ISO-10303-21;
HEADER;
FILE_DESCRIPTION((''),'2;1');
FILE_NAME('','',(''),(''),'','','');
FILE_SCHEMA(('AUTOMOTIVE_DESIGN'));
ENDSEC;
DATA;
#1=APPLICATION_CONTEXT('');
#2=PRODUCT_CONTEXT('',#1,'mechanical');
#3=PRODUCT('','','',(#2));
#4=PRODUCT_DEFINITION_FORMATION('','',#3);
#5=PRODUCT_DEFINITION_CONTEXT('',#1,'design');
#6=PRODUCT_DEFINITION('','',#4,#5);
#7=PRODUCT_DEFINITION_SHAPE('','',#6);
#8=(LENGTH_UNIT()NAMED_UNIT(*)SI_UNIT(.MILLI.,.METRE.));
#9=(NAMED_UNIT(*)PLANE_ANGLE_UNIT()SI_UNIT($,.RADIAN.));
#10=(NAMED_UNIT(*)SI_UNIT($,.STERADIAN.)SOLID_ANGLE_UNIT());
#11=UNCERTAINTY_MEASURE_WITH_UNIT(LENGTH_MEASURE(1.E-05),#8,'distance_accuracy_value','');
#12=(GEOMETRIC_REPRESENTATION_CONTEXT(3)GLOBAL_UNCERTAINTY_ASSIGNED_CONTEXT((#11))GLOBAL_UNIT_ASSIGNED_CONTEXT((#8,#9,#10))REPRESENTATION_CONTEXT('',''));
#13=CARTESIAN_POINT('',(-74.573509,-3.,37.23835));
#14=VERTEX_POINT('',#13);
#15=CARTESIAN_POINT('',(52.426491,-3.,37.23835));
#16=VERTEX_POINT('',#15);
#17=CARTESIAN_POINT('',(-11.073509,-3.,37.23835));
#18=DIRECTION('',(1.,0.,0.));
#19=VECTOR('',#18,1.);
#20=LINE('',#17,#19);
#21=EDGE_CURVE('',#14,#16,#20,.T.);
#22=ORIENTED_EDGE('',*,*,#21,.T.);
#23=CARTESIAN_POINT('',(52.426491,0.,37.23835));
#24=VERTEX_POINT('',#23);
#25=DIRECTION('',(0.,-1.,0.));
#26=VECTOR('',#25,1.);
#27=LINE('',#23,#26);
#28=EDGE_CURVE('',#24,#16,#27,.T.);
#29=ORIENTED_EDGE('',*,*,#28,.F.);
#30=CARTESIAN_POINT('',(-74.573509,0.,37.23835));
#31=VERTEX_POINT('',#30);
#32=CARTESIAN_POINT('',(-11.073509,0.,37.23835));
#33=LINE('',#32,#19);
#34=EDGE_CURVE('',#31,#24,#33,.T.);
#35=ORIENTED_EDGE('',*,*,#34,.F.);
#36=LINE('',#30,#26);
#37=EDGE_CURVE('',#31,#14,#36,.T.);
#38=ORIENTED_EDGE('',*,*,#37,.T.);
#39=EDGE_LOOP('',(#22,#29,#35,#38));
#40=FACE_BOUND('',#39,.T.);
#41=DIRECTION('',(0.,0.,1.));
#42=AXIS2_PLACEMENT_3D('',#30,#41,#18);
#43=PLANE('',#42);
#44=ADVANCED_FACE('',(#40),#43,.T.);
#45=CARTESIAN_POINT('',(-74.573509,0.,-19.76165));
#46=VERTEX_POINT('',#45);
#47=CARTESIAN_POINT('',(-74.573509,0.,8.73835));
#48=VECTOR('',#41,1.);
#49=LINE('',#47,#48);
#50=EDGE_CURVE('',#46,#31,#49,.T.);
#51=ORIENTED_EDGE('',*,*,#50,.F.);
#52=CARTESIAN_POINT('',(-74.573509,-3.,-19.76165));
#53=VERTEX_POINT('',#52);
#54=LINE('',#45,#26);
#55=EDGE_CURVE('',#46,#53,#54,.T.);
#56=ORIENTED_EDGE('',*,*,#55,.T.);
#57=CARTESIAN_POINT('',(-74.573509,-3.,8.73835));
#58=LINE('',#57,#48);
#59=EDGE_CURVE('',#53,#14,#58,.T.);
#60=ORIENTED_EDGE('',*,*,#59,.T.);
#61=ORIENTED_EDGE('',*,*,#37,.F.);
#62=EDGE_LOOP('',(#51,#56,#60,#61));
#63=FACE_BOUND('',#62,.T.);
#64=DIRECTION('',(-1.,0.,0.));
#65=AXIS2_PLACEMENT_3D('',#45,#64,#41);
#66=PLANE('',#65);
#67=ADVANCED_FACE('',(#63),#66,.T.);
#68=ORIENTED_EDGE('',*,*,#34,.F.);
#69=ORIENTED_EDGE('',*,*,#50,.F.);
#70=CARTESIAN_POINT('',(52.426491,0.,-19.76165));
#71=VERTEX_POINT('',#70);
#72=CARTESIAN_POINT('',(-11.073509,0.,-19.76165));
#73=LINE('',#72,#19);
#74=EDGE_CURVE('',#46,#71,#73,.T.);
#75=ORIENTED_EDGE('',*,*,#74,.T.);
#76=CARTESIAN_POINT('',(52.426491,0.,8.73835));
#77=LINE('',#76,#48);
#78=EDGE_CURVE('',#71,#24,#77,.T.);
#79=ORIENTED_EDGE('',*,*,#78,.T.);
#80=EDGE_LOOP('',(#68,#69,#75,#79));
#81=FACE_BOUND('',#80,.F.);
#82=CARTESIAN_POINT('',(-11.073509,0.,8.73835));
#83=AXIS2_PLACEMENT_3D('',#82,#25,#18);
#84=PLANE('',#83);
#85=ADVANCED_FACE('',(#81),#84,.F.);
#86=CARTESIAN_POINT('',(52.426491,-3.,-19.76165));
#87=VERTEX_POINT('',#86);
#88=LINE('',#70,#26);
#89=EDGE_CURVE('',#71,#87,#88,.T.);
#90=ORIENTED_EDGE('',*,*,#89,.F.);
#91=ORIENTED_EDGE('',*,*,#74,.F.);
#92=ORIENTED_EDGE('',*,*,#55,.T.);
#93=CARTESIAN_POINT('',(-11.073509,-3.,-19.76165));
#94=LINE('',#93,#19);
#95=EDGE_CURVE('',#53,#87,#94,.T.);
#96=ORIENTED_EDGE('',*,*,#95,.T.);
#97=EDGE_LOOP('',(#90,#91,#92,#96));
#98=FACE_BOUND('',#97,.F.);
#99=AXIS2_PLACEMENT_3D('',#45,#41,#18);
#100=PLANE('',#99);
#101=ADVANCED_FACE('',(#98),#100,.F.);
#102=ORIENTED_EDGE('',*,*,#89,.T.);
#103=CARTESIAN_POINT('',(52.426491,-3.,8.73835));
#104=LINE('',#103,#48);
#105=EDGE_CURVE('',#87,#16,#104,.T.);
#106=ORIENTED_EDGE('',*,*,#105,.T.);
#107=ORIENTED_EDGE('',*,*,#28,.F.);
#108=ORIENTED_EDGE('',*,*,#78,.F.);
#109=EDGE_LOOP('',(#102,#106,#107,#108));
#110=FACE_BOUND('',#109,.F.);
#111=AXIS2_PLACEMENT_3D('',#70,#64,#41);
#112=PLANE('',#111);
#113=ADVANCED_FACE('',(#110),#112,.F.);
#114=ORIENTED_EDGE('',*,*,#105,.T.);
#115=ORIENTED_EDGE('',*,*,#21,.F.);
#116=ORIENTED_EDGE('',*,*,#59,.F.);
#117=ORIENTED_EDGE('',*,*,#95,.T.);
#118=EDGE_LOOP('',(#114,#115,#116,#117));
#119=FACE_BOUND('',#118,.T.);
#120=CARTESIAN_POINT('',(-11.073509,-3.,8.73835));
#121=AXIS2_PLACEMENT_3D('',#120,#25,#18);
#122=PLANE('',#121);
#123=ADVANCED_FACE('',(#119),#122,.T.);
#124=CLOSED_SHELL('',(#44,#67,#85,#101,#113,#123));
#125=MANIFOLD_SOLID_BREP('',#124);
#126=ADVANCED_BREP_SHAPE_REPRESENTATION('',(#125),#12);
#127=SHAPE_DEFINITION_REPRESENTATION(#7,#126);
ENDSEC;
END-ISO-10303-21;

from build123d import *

# Parameters (mm, degrees)
F0_W     = 88.9
F0_H     = 63.5
F0_W_2   = 66.04
F0_H_2   = 12.192
F1_DEPTH = 6.35
F3_R     = 60.325
F3_R_2   = 7.9375
F4_DEPTH = 2.54
F6_W     = 127
F6_H     = 57
F7_DEPTH = 3


with BuildPart() as f1:
    # F0 (on Front) → F1 (new body)
    with BuildSketch(Plane.XZ):
        with Locations((10.876595974, 16.1719831105)):
            Rectangle(F0_W, F0_H)
        with Locations((11.8627893072, -0.3107596104)):
            Rectangle(F0_W_2, F0_H_2, mode=Mode.SUBTRACT)
        with Locations((10.9688239437, 30.9780669949)):
            Rectangle(F0_W_2, F0_H_2, mode=Mode.SUBTRACT)
    extrude(amount=F1_DEPTH)


with BuildPart() as f4:
    # F3 (on Front) → F4 (new body)
    with BuildSketch(Plane.XZ):
        with Locations((-8.6416769773, 16.2403918803)):
            Circle(F3_R)
        with Locations((-8.6416769773, 16.2403918803)):
            Circle(F3_R_2, mode=Mode.SUBTRACT)
    extrude(amount=F4_DEPTH)


with BuildPart() as f7:
    # F6 (on Front) → F7 (new body)
    with BuildSketch(Plane.XZ):
        with Locations((-11.0735092312, 8.7383504411)):
            Rectangle(F6_W, F6_H)
    extrude(amount=F7_DEPTH)


solid = f7.part
